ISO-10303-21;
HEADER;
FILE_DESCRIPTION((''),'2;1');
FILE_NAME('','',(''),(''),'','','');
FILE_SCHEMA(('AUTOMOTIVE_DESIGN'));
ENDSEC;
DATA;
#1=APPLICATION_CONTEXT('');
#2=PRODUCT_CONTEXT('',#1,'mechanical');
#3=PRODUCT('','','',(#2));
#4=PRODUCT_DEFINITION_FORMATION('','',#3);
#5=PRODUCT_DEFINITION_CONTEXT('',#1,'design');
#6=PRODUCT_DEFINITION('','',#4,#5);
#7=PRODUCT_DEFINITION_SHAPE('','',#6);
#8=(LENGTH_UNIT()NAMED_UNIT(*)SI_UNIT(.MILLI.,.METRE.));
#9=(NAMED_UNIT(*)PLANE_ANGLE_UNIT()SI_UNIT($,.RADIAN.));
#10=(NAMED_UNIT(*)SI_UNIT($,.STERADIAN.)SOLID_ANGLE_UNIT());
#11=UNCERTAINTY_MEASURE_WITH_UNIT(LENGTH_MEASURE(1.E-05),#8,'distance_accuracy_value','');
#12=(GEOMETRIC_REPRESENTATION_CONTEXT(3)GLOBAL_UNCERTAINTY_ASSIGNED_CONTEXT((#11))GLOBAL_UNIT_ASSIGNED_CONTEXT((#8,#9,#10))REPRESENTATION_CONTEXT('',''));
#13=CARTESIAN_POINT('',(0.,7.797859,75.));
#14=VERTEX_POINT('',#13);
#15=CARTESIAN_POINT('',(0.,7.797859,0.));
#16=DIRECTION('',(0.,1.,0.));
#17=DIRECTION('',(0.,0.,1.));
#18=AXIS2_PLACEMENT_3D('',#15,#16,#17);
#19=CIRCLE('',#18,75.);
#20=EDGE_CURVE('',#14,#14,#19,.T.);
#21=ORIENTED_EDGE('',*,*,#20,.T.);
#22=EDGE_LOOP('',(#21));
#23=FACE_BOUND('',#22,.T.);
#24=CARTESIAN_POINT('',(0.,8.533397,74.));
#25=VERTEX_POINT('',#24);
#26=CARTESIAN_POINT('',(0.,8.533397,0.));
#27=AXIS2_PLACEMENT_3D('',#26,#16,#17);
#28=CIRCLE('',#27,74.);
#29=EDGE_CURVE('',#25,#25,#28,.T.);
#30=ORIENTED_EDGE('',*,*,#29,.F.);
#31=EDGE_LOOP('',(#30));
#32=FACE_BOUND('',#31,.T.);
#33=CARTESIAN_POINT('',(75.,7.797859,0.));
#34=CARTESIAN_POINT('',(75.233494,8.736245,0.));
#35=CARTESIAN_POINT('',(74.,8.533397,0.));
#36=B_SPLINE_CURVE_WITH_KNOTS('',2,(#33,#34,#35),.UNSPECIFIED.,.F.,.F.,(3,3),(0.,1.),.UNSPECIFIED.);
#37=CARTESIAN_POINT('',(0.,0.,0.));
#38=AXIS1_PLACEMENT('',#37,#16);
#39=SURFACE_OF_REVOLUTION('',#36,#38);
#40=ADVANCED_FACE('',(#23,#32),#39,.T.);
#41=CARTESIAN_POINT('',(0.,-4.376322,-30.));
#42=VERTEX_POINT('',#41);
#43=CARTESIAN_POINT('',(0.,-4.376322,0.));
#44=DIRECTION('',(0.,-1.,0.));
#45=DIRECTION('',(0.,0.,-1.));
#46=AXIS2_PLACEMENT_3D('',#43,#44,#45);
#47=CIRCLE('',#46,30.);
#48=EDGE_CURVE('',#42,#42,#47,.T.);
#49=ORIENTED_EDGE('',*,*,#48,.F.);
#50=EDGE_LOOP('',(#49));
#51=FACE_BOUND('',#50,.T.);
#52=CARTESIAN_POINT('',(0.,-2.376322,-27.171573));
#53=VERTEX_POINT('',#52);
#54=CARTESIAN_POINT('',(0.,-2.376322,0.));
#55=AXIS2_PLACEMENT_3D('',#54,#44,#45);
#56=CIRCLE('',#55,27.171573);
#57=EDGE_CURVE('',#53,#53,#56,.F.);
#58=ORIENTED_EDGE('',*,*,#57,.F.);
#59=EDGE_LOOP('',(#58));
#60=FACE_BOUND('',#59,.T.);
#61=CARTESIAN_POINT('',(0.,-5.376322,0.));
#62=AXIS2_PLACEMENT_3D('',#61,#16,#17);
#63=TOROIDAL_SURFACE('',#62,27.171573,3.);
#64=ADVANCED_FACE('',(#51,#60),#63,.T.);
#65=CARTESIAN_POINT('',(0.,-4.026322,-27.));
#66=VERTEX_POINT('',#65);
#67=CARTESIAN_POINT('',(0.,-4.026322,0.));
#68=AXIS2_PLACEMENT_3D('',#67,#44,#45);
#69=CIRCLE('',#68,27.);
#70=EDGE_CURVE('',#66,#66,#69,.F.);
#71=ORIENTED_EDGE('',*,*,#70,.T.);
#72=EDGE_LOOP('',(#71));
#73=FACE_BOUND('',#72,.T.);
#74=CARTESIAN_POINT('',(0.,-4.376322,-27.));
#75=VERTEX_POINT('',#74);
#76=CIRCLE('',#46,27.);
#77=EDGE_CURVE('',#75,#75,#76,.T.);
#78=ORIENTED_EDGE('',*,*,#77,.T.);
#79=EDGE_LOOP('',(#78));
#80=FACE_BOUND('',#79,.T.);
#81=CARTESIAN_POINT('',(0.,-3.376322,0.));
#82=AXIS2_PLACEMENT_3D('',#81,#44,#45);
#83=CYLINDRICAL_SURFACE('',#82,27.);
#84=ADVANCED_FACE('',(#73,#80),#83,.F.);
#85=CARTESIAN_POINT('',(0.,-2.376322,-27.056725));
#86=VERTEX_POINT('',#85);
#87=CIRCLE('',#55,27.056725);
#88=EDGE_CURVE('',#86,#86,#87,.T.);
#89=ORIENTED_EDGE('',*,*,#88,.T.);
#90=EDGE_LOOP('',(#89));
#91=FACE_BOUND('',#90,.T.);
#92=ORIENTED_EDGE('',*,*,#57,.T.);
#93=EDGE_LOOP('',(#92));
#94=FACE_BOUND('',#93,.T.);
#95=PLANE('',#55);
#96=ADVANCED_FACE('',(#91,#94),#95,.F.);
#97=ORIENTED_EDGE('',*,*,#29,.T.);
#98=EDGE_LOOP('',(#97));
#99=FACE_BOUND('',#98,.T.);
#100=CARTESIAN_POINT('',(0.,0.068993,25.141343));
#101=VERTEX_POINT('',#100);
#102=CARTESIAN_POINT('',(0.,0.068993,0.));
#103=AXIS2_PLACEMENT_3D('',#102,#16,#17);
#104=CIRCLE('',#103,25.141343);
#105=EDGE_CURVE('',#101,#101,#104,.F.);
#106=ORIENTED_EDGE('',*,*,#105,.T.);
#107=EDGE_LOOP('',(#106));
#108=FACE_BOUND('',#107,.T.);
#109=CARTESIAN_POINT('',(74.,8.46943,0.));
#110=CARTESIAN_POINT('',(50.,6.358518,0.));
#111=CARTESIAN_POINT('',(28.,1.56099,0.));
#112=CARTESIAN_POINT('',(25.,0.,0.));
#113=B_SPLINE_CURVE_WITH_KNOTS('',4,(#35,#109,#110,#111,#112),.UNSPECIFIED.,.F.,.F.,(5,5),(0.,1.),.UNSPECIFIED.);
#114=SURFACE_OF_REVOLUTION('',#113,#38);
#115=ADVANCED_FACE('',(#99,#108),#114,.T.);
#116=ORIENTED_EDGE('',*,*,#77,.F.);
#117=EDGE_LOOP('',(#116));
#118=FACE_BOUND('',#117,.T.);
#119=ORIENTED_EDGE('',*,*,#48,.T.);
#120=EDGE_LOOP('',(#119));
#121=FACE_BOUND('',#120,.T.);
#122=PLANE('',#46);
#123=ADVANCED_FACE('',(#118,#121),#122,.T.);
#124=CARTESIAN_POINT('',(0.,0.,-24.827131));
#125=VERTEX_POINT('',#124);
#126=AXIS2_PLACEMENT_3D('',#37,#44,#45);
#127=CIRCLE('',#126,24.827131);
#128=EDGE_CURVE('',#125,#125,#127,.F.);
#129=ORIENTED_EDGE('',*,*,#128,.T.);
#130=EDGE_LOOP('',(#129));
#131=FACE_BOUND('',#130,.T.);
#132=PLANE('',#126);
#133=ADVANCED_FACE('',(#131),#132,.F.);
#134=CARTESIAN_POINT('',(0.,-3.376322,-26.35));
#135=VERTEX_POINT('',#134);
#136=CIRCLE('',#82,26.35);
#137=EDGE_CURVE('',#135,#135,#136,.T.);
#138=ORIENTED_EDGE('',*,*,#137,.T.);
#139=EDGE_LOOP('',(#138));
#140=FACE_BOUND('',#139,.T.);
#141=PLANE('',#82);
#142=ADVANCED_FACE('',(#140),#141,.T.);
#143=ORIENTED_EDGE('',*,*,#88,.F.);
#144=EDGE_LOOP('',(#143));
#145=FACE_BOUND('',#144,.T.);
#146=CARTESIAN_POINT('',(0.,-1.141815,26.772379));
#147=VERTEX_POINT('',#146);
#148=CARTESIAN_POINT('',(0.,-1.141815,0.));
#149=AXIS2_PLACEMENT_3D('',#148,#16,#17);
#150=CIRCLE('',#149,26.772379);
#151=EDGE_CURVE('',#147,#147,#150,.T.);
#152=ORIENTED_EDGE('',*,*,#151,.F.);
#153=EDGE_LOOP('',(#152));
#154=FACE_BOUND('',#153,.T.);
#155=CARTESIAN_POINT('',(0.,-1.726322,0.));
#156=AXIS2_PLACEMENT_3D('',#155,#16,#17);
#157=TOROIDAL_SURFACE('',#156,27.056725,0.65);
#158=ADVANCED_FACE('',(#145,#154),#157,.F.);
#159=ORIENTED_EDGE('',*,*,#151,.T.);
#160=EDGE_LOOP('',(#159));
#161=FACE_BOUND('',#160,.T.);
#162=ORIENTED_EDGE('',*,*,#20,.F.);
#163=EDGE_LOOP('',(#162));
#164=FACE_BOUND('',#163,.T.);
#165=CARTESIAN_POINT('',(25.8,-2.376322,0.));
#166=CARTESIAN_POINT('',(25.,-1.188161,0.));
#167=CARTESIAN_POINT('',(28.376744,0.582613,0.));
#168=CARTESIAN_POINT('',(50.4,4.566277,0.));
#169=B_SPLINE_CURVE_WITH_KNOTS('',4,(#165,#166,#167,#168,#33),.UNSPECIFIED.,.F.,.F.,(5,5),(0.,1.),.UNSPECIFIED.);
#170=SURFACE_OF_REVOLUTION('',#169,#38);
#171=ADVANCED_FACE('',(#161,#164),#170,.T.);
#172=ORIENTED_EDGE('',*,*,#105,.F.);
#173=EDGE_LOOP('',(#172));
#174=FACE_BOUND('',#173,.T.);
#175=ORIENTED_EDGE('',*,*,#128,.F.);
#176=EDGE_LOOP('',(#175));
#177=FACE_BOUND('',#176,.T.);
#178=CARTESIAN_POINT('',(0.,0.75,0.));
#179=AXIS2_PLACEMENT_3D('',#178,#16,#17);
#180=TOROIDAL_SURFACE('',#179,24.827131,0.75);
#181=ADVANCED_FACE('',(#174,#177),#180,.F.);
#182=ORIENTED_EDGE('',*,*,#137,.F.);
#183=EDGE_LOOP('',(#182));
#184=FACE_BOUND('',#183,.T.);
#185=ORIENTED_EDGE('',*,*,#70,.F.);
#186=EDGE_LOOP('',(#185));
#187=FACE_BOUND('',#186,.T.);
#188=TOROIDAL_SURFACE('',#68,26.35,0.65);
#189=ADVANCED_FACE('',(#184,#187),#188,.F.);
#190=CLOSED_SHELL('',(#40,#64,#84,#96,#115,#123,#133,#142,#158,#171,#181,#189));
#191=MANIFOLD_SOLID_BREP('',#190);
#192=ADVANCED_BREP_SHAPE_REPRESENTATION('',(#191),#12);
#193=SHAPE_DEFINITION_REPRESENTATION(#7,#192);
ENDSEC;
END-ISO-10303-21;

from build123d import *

# Parameters (mm, degrees)
SKETCH2_R           = 30
BOSS_EXTRUDE1_DEPTH = 2
FILLET1_R           = 3
FILLET3_R           = 0.75
FILLET4_R           = 0.65
SKETCH3_R           = 27
CUT_EXTRUDE1_DEPTH  = 1
FILLET6_R           = 0.65


with BuildPart() as part:
    # Sketch1 → Revolve1 (revolve)
    with BuildSketch(Plane.XY):
        with BuildLine():
            Line((0, 0), (25, 0))
            add(Edge.make_bspline(
                [(25, 0), (28, 1.560989968), (50, 6.358517879), (74, 8.46943016), (74, 8.533397199)],
                knots=[0, 0, 0, 0, 0, 1, 1, 1, 1, 1], degree=4))
            add(Edge.make_bspline(
                [(74, 8.533397199), (75.233494481, 8.736245364), (75, 7.797859499)],
                knots=[0, 0, 0, 1, 1, 1], degree=2))
            add(Edge.make_bspline(
                [(25.8, -2.376321587), (25, -1.188160793), (28.376743668, 0.582613407), (50.4, 4.566277202), (75, 7.797859499)],
                knots=[0, 0, 0, 0, 0, 1, 1, 1, 1, 1], degree=4))
            Line((25.8, -2.376321587), (0, -2.376321587))
            Line((0, -2.376321587), (0, 0))
        make_face()
    revolve(axis=Axis((0, 0, 0), (0, -1, 0)))

    # Sketch2 → Boss-Extrude1 (add)
    with BuildSketch(Plane.XZ.offset(2.376321587)):
        with Locations(Location((0, 0, 0), (0, 0, 270))):
            Circle(SKETCH2_R)
    extrude(amount=BOSS_EXTRUDE1_DEPTH)

    # Fillet1
    # the kernel refuses this fillet: 3 mm, written as the material it takes off along each edge
    with BuildSketch(Plane(origin=(0, -2.376321587, 0), x_dir=(0, 0, -1), z_dir=(-1, 0, 0))) as fillet1_piece_1:
        with BuildLine():
            CenterArc((27.171572875, 3), FILLET1_R, 270, 70.528779366)
            Line((27.171572875, 0), (27.171572875, -0.06))
            Line((27.171572875, -0.06), (30, -0.06))
            Line((30, -0.06), (30.06, 0))
            ThreePointArc((30.06, 0), (30.06, 1), (30.056568542, 1.98))
            Line((30.056568542, 1.98), (30, 2))
        make_face()
    revolve(axis=Axis((0, -2.376321587, 0), (0, -1, 0)), mode=Mode.SUBTRACT)

    # Fillet3
    fillet3_edges = [part.edges().sort_by_distance(p)[0] for p in [
        (-25, 0, 0),
    ]]
    fillet(fillet3_edges, radius=FILLET3_R)

    # Fillet4
    fillet4_edges = [part.edges().sort_by_distance(p)[0] for p in [
        (-25.8, -2.376321587, 0),
    ]]
    fillet(fillet4_edges, radius=FILLET4_R)

    # Sketch3 → Cut-Extrude1 (cut)
    with BuildSketch(Plane.XZ.offset(4.376321587)):
        with Locations(Location((0, 0, 0), (0, 0, 270))):
            Circle(SKETCH3_R)
    extrude(amount=-CUT_EXTRUDE1_DEPTH, mode=Mode.SUBTRACT)

    # Fillet6
    fillet6_edges = [part.edges().sort_by_distance(p)[0] for p in [
        (0, -3.376321587, 27),
    ]]
    fillet(fillet6_edges, radius=FILLET6_R)


solid = part.part
